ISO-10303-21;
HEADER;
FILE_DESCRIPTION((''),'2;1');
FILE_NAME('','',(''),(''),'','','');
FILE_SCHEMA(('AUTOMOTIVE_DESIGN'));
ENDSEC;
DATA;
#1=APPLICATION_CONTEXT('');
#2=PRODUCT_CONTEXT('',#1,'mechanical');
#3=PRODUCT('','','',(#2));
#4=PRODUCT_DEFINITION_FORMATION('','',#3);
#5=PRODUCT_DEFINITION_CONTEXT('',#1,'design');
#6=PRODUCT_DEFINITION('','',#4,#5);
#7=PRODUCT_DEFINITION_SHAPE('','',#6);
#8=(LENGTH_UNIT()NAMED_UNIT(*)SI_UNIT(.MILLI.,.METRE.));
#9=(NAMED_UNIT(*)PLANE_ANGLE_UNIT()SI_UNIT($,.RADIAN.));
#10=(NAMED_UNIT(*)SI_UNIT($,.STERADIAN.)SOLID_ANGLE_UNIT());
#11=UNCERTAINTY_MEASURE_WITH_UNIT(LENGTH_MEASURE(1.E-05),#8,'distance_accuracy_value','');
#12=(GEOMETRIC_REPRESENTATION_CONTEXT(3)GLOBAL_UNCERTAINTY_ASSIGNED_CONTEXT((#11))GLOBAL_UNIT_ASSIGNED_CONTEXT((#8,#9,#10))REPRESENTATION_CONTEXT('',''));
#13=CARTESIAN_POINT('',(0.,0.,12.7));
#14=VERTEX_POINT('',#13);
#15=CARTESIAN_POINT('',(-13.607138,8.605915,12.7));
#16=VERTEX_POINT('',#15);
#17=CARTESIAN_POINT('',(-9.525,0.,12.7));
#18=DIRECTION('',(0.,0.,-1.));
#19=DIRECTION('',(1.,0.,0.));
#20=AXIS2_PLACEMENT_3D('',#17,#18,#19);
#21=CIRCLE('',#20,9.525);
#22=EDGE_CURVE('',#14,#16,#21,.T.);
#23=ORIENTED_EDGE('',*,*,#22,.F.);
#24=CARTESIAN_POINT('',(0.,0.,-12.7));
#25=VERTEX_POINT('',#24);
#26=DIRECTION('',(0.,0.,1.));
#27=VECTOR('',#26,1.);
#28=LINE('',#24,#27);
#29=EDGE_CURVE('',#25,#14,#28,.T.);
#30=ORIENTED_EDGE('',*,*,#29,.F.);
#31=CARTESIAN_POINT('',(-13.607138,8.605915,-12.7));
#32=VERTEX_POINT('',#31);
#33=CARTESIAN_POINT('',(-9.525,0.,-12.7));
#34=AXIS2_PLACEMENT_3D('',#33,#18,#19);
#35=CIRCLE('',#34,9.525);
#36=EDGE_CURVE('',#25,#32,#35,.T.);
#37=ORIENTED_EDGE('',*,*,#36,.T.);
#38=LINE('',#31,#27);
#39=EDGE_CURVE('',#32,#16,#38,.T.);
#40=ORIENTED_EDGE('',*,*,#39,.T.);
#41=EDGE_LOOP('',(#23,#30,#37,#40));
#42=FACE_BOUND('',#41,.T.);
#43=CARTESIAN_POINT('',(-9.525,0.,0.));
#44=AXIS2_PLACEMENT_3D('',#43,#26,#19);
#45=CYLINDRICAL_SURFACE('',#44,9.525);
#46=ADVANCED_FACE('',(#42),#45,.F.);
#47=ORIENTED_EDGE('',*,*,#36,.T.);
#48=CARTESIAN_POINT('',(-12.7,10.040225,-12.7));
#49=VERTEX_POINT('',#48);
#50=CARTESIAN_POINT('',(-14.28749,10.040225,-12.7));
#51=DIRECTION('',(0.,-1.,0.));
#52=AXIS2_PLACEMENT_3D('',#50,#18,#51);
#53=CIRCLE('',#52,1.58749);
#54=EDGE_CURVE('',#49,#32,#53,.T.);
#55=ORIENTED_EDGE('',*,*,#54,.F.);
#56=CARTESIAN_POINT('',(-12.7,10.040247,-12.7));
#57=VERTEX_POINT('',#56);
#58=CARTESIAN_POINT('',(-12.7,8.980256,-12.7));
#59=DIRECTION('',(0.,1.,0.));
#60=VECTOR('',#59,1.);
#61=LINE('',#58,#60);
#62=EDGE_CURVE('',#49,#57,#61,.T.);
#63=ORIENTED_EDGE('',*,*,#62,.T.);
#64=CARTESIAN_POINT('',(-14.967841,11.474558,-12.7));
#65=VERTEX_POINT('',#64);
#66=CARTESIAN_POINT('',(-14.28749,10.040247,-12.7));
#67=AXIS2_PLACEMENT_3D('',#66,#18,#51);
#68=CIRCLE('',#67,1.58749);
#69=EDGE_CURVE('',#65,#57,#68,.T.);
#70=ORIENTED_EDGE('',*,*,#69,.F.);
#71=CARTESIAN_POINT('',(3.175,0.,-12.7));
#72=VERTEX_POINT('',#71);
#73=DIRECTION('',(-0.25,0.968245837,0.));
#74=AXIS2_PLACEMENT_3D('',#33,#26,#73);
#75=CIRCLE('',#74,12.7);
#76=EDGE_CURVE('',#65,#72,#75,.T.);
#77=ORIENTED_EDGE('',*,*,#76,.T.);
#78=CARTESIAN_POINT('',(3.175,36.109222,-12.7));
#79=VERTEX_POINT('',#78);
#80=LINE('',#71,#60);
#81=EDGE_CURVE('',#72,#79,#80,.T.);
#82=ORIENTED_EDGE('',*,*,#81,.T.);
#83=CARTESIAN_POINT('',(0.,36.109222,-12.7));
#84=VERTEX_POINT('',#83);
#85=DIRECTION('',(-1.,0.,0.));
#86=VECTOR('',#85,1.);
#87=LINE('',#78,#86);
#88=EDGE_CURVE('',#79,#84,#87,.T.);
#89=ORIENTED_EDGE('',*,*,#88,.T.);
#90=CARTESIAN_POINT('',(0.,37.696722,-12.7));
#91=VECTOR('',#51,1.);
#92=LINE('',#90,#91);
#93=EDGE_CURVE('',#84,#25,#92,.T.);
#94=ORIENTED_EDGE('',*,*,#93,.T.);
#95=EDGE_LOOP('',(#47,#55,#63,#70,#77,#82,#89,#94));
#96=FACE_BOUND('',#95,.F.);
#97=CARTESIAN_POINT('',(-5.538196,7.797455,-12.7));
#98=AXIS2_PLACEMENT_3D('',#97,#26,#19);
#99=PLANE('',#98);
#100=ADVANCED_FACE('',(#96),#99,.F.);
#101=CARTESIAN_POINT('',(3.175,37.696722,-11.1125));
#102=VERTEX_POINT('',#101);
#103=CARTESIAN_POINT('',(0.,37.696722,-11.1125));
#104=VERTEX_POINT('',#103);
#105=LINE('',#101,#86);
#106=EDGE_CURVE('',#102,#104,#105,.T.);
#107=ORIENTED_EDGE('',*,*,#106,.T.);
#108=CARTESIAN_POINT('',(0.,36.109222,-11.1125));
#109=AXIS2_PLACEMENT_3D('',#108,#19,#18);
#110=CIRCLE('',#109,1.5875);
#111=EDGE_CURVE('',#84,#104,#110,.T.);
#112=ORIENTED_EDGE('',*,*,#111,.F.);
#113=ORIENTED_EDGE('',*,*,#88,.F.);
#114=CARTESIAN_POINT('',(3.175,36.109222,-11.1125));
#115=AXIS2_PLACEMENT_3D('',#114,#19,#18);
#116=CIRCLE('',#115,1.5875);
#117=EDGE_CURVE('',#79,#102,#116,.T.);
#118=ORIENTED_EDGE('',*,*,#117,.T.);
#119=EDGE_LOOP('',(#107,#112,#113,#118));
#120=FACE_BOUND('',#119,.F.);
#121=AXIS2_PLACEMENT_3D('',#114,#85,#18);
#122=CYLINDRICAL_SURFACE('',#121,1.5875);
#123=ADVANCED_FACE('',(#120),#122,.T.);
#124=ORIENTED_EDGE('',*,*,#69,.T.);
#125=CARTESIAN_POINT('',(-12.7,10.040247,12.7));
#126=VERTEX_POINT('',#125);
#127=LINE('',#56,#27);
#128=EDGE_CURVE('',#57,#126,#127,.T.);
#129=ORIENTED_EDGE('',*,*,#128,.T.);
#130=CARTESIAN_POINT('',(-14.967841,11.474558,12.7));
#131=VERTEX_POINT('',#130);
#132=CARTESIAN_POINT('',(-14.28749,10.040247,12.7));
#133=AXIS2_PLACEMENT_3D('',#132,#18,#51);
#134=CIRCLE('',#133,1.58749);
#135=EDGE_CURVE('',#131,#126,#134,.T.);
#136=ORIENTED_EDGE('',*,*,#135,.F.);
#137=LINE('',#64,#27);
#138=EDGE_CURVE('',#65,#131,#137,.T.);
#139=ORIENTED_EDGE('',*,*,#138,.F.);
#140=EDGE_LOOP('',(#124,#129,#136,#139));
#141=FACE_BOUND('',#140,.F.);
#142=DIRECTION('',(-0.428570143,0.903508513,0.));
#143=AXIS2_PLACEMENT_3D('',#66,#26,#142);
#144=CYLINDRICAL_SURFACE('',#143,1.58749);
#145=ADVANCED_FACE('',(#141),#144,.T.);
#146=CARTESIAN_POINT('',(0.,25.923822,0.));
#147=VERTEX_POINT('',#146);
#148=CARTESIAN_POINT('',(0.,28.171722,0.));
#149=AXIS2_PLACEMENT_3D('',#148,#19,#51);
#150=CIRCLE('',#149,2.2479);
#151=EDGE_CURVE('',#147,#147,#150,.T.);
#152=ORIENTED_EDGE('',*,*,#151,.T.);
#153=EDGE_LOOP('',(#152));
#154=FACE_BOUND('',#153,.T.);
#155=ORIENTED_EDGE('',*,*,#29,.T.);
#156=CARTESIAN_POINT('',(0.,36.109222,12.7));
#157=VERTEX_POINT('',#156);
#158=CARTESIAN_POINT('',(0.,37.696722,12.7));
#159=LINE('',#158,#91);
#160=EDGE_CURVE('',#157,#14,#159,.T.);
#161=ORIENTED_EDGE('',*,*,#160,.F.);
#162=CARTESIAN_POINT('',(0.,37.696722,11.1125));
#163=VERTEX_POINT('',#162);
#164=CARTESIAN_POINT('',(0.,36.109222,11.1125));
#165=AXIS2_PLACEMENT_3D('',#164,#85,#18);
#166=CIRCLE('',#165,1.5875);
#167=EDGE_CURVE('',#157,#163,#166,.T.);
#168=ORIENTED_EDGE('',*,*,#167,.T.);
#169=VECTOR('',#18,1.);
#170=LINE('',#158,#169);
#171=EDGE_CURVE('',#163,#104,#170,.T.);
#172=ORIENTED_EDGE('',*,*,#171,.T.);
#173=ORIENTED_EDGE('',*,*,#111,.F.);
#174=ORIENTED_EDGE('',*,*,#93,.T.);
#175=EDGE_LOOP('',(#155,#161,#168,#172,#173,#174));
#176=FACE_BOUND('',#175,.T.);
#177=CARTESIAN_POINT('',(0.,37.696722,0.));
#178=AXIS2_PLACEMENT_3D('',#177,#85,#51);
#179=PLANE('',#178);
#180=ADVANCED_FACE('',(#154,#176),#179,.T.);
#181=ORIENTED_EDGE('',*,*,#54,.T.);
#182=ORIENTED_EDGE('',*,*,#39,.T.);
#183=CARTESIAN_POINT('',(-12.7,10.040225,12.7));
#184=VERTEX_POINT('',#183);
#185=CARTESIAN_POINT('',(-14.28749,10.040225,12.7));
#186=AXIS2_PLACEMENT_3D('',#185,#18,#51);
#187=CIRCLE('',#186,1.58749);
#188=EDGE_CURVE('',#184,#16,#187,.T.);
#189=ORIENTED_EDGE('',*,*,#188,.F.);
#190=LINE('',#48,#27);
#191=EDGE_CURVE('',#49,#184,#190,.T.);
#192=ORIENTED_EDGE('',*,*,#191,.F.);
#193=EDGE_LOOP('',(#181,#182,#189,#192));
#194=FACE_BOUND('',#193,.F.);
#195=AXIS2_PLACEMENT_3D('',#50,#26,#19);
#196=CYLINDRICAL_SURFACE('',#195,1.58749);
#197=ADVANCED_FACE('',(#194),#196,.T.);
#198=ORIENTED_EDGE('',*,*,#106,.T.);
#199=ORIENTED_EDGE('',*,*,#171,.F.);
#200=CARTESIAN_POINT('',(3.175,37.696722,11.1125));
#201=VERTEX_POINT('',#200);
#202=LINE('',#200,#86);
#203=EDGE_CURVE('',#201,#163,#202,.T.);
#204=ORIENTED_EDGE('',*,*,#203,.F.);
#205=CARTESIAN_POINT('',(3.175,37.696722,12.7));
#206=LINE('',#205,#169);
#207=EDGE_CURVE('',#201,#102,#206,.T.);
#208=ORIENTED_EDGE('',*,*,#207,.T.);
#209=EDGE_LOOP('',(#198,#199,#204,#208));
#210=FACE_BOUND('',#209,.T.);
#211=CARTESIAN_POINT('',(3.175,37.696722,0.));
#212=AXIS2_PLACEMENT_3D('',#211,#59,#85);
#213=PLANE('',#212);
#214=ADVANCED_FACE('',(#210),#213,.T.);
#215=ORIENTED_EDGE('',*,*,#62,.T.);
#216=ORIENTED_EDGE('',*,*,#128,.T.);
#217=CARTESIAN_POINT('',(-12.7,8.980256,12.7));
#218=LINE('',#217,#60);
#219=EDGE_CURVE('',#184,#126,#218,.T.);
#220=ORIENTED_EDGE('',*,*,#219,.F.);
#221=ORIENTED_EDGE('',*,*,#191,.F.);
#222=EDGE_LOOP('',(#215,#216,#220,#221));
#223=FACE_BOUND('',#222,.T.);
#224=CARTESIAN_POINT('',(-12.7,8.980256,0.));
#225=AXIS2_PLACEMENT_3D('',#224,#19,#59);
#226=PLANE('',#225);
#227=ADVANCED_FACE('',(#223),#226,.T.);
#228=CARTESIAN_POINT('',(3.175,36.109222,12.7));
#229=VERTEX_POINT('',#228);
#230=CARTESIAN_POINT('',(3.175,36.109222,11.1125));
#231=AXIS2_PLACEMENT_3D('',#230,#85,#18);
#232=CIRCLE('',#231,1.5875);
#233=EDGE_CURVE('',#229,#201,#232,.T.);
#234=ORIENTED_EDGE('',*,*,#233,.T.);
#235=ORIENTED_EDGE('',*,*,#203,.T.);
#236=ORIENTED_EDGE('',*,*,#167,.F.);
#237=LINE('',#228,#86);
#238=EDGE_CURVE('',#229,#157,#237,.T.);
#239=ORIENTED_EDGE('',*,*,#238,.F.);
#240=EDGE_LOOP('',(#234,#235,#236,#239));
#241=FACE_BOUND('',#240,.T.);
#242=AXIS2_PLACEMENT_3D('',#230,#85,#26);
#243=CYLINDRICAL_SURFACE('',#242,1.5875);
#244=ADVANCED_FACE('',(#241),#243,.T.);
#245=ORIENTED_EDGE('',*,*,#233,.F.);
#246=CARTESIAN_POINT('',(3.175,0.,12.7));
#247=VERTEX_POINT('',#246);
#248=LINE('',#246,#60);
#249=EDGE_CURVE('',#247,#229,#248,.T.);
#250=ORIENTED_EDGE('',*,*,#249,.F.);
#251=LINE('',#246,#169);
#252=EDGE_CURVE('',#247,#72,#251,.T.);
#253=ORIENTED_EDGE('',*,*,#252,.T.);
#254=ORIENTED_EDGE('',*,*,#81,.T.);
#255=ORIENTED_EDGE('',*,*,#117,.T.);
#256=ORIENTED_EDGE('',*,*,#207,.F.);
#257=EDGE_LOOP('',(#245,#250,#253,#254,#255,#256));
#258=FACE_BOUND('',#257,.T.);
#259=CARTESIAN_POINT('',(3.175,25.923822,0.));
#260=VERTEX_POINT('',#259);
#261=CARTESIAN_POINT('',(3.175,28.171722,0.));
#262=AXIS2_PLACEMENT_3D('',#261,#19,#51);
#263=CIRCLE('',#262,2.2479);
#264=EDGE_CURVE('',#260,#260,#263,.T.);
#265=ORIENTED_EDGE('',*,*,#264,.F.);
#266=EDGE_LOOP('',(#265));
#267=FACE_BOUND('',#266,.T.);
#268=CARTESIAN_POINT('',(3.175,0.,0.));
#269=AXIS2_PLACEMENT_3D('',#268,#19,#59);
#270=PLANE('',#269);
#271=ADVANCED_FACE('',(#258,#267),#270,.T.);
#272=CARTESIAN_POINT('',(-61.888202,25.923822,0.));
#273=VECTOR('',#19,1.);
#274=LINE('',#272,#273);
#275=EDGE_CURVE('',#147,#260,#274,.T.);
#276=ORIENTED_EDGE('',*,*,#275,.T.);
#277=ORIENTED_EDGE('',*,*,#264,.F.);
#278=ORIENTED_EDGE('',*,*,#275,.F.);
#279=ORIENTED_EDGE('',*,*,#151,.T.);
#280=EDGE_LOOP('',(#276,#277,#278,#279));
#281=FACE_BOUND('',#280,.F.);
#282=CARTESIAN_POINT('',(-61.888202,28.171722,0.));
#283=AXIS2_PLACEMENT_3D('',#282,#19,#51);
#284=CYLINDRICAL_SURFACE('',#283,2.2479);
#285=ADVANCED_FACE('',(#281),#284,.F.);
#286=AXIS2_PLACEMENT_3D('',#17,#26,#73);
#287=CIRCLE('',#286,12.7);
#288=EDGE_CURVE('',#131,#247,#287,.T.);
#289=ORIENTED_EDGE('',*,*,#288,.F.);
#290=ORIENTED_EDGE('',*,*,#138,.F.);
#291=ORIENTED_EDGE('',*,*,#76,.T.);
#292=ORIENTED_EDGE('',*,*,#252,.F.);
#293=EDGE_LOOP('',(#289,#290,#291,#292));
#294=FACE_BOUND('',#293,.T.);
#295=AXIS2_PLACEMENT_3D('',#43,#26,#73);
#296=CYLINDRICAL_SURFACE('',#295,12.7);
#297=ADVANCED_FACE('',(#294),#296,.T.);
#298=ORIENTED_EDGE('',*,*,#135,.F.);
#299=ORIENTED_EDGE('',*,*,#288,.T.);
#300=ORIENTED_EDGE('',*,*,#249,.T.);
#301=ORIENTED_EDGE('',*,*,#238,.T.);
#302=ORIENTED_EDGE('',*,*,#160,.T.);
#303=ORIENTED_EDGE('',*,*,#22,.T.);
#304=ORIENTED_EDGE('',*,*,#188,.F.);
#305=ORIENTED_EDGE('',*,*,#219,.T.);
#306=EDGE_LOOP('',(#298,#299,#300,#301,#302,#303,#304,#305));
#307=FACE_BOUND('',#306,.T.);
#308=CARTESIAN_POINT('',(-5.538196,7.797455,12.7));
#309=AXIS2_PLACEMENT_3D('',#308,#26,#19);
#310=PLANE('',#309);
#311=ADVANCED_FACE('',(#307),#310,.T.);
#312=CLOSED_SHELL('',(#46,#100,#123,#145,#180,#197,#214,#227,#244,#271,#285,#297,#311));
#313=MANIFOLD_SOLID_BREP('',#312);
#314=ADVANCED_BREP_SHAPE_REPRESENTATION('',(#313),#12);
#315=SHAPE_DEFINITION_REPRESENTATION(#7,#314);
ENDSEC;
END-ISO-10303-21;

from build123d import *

# Parameters (mm, degrees)
F1_DEPTH = 12.7
F2_R     = 1.58749
F3_R     = 1.5875
F5_D     = 4.4958


# Not quite as in the source:
# - a fillet or chamfer is up to 0.001 mm smaller than in the source, because OpenCascade refuses the exact size


with BuildPart() as f1:
    # F0 (on Top) → F1 (new body, symmetric)
    with BuildSketch(Plane.XY):
        with BuildLine():
            Line((0, 37.6967221242), (0, 0))
            ThreePointArc((0, 0), (-15.024261314, -7.7771299333), (-12.7, 8.9802561211))
            Line((-12.7, 8.9802561211), (-12.7, 12.2967221242))
            ThreePointArc((-12.7, 12.2967221242), (-17.3021299333, -10.040231571), (3.175, 0))
            Line((3.175, 0), (3.175, 37.6967221242))
            Line((3.175, 37.6967221242), (0, 37.6967221242))
        make_face()
    extrude(amount=F1_DEPTH, both=True)

    # F2 (radius 1.5875 in the source; OpenCascade refuses exactly that, so slightly less here)
    f2_edges = [f1.edges().sort_by_distance(p)[0] for p in [
        (-12.7, 8.980256, 0),
        (-12.7, 12.296722, 0),
    ]]
    fillet(f2_edges, radius=F2_R)

    # F3
    f3_edges = [f1.edges().sort_by_distance(p)[0] for p in [
        (1.5875, 37.696722, 12.7),
        (1.5875, 37.696722, -12.7),
    ]]
    fillet(f3_edges, radius=F3_R)

    # F5 (through all)
    with Locations(Plane(origin=(0, 0, 0), x_dir=(0, 1, 0), z_dir=(-1, 0, 0))):
        with Locations((28.1717221242, 0)):
            Hole(F5_D / 2)


solid = f1.part
